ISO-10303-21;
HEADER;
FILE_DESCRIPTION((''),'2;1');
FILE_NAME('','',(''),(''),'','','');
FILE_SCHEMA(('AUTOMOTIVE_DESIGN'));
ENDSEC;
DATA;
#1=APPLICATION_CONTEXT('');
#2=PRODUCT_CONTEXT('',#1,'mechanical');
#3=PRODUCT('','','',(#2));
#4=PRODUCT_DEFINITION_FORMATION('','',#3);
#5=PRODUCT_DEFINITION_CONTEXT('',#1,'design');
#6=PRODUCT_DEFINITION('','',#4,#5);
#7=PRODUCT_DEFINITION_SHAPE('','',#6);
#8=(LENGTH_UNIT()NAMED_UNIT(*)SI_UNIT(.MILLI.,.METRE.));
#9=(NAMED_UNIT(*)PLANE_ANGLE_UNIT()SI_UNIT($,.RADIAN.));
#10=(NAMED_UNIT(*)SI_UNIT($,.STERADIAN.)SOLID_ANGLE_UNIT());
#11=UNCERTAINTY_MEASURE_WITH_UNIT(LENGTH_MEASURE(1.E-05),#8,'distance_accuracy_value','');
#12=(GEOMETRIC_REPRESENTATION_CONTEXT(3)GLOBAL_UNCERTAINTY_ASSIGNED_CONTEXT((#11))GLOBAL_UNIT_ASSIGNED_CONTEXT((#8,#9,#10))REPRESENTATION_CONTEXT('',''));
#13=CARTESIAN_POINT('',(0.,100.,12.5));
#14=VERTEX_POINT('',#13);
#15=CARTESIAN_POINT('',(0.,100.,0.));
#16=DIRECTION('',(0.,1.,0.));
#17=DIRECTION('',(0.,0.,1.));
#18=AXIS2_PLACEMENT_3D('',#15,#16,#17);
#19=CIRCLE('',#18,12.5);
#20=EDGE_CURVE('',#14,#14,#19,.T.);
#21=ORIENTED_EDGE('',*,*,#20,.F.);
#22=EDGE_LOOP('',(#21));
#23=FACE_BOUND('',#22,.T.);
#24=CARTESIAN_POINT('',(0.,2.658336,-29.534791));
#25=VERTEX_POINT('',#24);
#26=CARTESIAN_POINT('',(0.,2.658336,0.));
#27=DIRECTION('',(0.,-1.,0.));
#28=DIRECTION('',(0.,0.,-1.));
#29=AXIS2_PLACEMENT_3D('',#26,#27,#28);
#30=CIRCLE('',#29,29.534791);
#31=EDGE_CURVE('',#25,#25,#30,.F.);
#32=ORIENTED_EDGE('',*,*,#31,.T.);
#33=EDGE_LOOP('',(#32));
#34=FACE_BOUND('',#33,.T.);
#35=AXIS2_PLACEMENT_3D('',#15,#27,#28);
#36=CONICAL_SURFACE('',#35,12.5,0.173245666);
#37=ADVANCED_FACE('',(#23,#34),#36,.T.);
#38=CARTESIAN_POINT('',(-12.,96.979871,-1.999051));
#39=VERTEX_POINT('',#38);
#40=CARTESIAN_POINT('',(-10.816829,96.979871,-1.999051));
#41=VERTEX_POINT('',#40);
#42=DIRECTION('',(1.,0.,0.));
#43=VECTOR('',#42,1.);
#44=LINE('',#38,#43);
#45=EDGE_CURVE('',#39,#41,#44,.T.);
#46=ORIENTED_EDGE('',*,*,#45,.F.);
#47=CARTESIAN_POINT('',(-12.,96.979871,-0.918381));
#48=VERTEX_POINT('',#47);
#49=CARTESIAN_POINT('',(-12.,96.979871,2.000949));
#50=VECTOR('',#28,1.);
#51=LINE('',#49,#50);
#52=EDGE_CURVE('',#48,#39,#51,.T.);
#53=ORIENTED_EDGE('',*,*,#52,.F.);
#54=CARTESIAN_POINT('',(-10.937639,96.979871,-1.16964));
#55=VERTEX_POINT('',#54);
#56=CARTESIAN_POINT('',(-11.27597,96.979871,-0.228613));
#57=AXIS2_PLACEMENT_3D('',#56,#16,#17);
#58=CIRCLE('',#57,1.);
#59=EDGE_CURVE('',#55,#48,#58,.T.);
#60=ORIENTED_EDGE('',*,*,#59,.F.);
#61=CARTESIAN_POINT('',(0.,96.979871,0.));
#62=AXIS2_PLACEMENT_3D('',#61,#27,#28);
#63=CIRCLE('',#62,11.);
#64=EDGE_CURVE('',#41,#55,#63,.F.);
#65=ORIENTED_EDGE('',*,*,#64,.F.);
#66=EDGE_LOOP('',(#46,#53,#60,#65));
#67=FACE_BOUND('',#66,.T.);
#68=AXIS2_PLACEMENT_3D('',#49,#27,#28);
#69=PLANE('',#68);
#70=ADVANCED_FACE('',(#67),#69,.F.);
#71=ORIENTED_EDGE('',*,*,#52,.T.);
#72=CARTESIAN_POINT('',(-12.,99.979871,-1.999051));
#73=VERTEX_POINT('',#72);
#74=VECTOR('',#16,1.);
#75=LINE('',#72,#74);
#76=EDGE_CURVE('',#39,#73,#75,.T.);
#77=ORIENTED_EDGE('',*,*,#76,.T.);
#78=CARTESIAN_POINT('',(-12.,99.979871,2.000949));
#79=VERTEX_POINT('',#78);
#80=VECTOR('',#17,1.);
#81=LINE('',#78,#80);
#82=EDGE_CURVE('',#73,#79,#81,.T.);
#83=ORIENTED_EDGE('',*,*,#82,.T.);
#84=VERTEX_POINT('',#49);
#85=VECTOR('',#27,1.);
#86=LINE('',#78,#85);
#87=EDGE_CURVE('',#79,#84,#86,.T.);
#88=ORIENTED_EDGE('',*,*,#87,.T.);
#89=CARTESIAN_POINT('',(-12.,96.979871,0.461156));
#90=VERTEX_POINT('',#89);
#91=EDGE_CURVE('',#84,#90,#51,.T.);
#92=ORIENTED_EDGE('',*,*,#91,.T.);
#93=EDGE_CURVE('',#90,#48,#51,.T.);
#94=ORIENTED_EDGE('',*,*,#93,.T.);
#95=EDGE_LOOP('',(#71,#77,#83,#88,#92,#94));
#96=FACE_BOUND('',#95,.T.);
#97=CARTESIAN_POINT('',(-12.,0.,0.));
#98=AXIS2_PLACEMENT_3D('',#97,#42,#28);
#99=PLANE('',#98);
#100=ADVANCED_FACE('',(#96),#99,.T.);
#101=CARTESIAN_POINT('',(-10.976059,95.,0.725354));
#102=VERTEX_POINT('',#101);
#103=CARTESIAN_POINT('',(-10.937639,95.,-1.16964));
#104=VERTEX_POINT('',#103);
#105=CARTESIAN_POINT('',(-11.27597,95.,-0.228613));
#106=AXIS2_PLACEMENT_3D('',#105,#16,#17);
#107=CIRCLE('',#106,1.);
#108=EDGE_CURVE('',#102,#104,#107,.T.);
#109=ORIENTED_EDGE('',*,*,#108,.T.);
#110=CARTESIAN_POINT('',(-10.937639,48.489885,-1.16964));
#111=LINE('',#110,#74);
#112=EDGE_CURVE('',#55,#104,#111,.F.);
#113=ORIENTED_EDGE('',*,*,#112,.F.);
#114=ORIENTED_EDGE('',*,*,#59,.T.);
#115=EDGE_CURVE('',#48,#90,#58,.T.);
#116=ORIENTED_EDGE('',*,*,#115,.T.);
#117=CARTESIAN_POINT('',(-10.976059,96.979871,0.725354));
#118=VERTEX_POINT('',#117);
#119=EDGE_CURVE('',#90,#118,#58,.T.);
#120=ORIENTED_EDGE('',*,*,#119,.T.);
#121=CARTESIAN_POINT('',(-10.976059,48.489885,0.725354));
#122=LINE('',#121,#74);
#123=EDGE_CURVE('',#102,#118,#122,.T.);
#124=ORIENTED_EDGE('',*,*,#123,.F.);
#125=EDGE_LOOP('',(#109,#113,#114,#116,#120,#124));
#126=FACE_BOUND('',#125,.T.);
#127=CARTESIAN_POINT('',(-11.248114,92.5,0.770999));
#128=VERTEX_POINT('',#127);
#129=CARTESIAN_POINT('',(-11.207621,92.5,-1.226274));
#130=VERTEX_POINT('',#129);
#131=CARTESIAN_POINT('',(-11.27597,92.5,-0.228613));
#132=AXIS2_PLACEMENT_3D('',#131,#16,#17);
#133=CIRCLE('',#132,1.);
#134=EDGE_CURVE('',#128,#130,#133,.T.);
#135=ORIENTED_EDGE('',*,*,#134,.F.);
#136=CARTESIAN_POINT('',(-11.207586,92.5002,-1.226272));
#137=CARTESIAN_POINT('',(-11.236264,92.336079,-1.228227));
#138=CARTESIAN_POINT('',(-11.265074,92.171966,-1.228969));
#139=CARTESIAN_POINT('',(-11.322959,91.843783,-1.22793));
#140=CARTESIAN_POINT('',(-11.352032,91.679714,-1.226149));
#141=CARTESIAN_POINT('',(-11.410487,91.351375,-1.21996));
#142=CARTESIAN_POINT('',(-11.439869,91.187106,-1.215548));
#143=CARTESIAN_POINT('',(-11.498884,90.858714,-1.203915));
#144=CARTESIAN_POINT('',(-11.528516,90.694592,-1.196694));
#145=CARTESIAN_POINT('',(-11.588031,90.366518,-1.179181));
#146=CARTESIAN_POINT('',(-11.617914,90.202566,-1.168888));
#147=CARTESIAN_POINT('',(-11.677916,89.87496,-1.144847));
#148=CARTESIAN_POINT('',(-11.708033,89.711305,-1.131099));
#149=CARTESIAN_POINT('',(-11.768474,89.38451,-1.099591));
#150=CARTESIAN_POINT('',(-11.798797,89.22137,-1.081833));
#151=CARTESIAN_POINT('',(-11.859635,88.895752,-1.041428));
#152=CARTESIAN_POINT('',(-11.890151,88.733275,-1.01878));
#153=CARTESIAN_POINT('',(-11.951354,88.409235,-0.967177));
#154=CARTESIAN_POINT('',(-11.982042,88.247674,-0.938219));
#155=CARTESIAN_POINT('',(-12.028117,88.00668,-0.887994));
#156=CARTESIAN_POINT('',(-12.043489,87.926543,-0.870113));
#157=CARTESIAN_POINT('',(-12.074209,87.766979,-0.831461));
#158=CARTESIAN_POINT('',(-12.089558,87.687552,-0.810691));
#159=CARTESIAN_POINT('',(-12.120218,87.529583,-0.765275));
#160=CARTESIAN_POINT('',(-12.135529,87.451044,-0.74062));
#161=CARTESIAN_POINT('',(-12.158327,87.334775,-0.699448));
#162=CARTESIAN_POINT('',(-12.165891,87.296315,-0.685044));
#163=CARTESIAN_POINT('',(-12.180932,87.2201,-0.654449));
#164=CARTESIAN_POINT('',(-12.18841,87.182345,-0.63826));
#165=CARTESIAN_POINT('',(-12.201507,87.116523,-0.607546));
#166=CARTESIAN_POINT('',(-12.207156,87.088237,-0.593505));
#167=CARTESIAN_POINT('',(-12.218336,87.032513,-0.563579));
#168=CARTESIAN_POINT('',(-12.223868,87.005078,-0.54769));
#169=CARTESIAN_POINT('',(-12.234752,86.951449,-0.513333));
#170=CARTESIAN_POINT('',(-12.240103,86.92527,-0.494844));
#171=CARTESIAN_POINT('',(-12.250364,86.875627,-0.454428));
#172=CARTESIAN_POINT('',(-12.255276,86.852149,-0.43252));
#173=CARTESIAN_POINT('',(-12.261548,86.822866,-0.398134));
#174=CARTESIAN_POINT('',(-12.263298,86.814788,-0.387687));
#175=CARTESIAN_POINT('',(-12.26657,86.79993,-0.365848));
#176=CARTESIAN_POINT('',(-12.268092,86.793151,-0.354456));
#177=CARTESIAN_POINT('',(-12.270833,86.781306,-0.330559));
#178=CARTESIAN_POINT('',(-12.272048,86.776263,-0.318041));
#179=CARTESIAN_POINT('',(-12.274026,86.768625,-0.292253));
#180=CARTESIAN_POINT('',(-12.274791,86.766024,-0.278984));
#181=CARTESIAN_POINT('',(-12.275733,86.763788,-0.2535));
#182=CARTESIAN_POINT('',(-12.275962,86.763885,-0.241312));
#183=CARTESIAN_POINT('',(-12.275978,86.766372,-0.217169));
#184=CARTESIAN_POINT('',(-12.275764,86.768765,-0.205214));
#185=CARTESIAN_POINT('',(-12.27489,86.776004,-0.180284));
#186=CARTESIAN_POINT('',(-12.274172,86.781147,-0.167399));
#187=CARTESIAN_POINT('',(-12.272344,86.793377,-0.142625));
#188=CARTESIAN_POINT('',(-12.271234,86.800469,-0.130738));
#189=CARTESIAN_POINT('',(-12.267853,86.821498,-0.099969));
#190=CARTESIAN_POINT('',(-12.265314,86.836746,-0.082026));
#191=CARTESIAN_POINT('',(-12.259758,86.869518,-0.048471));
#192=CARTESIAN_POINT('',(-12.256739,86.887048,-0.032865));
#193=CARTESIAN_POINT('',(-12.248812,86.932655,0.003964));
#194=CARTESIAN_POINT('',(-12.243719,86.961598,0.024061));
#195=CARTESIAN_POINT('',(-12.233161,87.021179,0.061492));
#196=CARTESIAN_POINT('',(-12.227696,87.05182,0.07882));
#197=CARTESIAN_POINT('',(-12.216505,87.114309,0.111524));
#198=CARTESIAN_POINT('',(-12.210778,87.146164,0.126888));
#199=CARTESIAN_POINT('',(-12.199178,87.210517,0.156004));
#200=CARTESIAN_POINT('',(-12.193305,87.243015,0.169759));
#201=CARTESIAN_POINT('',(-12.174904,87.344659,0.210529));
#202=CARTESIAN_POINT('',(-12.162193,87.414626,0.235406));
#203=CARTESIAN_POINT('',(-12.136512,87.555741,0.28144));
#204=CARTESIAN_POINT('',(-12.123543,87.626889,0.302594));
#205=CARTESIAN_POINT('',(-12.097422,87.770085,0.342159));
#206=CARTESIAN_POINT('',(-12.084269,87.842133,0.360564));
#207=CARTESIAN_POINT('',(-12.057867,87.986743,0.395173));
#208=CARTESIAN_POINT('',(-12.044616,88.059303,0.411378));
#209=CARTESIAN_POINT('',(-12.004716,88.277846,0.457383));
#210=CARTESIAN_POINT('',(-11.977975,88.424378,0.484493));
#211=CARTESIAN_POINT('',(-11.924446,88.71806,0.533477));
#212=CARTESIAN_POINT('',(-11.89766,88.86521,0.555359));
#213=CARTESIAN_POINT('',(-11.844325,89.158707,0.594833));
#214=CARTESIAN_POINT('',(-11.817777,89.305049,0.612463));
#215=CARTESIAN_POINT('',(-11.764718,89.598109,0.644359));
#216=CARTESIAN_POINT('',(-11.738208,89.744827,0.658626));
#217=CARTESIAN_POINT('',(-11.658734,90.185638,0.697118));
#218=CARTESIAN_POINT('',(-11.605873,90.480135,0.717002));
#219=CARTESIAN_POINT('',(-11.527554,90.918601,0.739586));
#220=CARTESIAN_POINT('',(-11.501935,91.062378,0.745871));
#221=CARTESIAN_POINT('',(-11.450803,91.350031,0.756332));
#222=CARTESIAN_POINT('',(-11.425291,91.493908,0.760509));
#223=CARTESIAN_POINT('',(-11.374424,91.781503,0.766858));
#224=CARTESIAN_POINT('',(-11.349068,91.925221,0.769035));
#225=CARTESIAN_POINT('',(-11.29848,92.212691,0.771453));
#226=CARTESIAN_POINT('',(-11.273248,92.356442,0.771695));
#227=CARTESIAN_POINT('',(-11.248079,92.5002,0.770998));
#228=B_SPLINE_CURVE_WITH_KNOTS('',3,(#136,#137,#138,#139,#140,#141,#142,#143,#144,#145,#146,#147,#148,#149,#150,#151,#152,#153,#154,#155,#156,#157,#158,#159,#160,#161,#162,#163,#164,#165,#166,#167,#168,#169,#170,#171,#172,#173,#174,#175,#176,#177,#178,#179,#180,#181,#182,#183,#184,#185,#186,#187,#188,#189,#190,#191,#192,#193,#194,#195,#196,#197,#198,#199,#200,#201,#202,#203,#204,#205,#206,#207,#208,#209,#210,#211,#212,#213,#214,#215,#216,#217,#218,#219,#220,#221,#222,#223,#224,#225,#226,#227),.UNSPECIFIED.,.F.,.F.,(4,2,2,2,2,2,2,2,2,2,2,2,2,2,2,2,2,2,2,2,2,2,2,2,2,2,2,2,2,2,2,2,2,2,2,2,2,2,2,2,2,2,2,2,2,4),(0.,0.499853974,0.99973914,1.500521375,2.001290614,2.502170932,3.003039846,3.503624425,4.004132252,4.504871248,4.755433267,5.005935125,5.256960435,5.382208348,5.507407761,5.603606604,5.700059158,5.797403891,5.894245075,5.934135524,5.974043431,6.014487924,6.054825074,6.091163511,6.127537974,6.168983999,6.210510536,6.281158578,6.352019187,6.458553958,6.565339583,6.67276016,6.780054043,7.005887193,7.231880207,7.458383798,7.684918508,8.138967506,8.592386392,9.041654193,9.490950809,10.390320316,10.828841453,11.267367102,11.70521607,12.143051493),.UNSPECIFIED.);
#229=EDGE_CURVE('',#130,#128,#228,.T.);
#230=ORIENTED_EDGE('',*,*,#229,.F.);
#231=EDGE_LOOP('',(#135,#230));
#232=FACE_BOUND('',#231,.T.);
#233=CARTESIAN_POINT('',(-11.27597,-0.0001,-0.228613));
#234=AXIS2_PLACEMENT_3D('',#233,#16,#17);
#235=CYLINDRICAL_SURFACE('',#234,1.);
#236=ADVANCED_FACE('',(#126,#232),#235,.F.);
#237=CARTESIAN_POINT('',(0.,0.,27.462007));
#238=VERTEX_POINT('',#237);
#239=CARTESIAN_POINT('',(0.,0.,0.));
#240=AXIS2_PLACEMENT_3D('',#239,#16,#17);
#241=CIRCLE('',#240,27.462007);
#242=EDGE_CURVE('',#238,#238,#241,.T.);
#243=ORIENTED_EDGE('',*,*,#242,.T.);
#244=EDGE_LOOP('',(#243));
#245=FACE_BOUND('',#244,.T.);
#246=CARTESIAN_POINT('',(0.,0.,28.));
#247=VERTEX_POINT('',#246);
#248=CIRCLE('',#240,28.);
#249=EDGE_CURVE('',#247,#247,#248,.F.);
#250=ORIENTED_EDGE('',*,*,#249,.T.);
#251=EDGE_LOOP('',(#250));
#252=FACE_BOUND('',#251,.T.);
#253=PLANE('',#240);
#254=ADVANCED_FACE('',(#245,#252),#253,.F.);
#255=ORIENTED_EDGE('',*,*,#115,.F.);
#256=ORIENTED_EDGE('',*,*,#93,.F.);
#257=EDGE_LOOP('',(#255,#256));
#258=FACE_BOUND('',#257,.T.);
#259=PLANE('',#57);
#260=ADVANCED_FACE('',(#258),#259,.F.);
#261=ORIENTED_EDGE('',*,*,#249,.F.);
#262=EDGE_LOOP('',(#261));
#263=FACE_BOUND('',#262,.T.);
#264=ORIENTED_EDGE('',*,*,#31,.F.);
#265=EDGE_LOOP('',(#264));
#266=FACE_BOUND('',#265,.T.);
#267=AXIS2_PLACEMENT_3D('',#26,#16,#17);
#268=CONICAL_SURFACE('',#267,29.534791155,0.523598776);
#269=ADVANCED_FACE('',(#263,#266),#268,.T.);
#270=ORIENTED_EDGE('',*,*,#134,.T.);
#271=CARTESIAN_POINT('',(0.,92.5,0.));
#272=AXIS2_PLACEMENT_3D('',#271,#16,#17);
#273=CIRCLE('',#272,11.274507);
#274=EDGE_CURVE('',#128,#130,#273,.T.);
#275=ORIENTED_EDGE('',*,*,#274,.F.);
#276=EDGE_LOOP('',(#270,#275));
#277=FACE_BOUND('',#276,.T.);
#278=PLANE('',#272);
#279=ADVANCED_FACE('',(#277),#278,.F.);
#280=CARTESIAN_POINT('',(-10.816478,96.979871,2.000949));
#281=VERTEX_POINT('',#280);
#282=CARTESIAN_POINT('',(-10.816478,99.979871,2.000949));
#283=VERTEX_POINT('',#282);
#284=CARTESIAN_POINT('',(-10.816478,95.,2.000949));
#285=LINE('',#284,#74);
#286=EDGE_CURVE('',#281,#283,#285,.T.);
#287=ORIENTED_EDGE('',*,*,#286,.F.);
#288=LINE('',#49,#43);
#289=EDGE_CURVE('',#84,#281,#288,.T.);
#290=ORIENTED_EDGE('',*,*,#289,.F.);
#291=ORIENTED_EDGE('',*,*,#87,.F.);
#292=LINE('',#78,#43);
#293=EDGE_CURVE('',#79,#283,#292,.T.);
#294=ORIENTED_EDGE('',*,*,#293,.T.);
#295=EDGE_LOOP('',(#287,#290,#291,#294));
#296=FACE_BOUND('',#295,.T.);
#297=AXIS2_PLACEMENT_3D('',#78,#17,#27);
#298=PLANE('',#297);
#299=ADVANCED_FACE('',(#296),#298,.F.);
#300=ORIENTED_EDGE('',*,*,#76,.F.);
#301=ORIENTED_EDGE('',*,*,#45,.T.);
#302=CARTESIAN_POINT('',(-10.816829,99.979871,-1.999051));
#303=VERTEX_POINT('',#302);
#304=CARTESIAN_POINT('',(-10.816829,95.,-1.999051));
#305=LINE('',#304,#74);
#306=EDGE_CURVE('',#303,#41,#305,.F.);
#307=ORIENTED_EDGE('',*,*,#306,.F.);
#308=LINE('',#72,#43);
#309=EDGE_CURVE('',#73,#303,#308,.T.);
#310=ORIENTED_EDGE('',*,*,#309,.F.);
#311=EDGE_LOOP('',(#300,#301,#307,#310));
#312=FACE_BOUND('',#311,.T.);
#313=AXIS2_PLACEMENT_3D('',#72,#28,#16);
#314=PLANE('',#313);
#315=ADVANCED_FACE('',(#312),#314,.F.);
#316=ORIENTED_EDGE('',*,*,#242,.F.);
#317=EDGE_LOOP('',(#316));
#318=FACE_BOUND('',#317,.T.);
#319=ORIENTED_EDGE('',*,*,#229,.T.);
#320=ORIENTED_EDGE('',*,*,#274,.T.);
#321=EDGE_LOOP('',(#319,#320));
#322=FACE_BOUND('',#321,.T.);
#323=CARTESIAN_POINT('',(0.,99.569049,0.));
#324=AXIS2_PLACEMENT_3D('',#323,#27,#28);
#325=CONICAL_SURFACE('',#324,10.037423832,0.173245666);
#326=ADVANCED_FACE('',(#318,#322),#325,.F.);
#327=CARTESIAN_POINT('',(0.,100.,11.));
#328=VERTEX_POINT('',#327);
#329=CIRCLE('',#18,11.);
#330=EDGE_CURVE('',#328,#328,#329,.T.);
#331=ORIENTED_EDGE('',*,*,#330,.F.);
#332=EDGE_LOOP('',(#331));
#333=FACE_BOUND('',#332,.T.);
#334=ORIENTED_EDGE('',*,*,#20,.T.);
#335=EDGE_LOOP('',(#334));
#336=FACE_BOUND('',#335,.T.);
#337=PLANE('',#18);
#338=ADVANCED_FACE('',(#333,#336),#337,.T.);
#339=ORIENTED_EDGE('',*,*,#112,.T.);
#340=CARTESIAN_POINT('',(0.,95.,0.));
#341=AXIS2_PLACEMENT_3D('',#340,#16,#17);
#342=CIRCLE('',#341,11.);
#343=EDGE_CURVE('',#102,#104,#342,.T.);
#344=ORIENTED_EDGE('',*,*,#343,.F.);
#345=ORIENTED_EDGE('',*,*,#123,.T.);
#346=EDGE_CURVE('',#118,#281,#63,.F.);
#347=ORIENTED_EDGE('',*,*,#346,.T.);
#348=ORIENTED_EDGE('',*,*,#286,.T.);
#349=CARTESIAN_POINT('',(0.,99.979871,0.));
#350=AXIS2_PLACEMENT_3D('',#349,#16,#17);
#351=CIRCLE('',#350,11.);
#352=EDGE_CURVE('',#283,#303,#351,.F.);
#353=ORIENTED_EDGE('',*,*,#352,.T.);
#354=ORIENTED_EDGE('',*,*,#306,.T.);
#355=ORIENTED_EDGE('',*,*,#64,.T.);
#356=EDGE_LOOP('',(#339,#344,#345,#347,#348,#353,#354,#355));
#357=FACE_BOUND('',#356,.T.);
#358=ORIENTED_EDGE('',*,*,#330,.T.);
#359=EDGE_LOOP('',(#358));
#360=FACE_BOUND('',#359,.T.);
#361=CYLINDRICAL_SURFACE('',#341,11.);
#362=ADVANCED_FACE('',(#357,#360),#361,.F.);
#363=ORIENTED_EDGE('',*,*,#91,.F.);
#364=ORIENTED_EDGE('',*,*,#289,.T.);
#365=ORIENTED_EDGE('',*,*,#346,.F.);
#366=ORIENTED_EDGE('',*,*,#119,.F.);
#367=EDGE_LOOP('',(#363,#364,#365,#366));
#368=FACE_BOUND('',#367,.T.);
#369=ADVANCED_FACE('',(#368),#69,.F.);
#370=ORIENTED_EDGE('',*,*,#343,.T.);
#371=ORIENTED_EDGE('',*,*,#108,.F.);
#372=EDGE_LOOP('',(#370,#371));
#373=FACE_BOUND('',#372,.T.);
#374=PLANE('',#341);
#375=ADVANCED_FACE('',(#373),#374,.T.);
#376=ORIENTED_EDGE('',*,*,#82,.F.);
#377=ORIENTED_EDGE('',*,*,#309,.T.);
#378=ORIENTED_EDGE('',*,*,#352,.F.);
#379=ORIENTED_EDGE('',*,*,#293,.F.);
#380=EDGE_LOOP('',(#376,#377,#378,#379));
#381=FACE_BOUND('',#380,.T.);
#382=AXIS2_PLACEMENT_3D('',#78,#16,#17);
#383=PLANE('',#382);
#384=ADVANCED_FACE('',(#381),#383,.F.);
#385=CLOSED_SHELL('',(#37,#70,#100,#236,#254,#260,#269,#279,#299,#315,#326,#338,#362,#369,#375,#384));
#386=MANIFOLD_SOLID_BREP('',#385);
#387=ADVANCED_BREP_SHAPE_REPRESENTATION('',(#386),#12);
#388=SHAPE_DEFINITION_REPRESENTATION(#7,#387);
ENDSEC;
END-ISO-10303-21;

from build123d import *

# Parameters (mm, degrees)
SKETCH2_R          = 12.5
SKETCH1_R          = 30
SKETCH5_R          = 11
CUT_EXTRUDE2_DEPTH = 5
SKETCH7_W          = 4
SKETCH7_H          = 3
CUT_EXTRUDE4_DEPTH = 12
SKETCH8_R          = 1
CUT_EXTRUDE6_DEPTH = 106.854123131
CHAMFER1_SIZE      = 2
CHAMFER1_SIZE2     = 2.698735062


# Read off the part's stored shape, not the designer's step: Shell2
with BuildPart() as part:
    # Sketch2 → Loft1 section 0
    with BuildSketch(Plane(origin=(0, 100, 0), x_dir=(1, 0, 0), z_dir=(0, 1, 0))):
        Circle(SKETCH2_R)
    # Sketch1 → Loft1 section 1
    with BuildSketch(Plane(origin=(0, 0, 0), x_dir=(1, 0, 0), z_dir=(0, 1, 0))):
        Circle(SKETCH1_R)
    loft()

    # Sketch5 → Cut-Extrude2 (cut)
    with BuildSketch(Plane(origin=(0, 100, 0), x_dir=(1, 0, 0), z_dir=(0, 1, 0))):
        with Locations(Location((0, 0, 0), (0, 0, 270))):
            Circle(SKETCH5_R)
    extrude(amount=-CUT_EXTRUDE2_DEPTH, mode=Mode.SUBTRACT)

    # Sketch7 → Cut-Extrude4 (cut)
    with BuildSketch(Plane(origin=(0, 0, 0), x_dir=(0, 0, -1), z_dir=(1, 0, 0))):
        with Locations((-0.000948901, 98.479870862)):
            Rectangle(SKETCH7_W, SKETCH7_H)
    extrude(amount=-CUT_EXTRUDE4_DEPTH, mode=Mode.SUBTRACT)

    # Shell2 outline → Shell2 (revolve, cut)
    with BuildSketch(Plane.XY):
        Polygon((11.274507437, 92.5), (0, 92.5), (0, 0), (27.462007437, 0), align=None)
    revolve(axis=Axis((0, 0, 0), (0, 1, 0)), mode=Mode.SUBTRACT)

    # Sketch8 → Cut-Extrude6 (cut, through all)
    with BuildSketch(Plane(origin=(0, 96.979870862, 0), x_dir=(1, 0, 0), z_dir=(0, 1, 0))):
        with Locations(Location((-11.275969927, 0.228612613, 0), (0, 0, 271.596209632))):
            Circle(SKETCH8_R)
    extrude(amount=-CUT_EXTRUDE6_DEPTH, mode=Mode.SUBTRACT)

    # Chamfer1
    chamfer1_edges = [part.edges().sort_by_distance(p)[0] for p in [
        (-30, 0, 0),
    ]]
    chamfer1_side = [part.faces().sort_by_distance(p)[0] for p in [
        (-29.151471863, 0, 0),
    ]]
    chamfer(chamfer1_edges, length=CHAMFER1_SIZE, length2=CHAMFER1_SIZE2, reference=chamfer1_side[0])


solid = part.part
